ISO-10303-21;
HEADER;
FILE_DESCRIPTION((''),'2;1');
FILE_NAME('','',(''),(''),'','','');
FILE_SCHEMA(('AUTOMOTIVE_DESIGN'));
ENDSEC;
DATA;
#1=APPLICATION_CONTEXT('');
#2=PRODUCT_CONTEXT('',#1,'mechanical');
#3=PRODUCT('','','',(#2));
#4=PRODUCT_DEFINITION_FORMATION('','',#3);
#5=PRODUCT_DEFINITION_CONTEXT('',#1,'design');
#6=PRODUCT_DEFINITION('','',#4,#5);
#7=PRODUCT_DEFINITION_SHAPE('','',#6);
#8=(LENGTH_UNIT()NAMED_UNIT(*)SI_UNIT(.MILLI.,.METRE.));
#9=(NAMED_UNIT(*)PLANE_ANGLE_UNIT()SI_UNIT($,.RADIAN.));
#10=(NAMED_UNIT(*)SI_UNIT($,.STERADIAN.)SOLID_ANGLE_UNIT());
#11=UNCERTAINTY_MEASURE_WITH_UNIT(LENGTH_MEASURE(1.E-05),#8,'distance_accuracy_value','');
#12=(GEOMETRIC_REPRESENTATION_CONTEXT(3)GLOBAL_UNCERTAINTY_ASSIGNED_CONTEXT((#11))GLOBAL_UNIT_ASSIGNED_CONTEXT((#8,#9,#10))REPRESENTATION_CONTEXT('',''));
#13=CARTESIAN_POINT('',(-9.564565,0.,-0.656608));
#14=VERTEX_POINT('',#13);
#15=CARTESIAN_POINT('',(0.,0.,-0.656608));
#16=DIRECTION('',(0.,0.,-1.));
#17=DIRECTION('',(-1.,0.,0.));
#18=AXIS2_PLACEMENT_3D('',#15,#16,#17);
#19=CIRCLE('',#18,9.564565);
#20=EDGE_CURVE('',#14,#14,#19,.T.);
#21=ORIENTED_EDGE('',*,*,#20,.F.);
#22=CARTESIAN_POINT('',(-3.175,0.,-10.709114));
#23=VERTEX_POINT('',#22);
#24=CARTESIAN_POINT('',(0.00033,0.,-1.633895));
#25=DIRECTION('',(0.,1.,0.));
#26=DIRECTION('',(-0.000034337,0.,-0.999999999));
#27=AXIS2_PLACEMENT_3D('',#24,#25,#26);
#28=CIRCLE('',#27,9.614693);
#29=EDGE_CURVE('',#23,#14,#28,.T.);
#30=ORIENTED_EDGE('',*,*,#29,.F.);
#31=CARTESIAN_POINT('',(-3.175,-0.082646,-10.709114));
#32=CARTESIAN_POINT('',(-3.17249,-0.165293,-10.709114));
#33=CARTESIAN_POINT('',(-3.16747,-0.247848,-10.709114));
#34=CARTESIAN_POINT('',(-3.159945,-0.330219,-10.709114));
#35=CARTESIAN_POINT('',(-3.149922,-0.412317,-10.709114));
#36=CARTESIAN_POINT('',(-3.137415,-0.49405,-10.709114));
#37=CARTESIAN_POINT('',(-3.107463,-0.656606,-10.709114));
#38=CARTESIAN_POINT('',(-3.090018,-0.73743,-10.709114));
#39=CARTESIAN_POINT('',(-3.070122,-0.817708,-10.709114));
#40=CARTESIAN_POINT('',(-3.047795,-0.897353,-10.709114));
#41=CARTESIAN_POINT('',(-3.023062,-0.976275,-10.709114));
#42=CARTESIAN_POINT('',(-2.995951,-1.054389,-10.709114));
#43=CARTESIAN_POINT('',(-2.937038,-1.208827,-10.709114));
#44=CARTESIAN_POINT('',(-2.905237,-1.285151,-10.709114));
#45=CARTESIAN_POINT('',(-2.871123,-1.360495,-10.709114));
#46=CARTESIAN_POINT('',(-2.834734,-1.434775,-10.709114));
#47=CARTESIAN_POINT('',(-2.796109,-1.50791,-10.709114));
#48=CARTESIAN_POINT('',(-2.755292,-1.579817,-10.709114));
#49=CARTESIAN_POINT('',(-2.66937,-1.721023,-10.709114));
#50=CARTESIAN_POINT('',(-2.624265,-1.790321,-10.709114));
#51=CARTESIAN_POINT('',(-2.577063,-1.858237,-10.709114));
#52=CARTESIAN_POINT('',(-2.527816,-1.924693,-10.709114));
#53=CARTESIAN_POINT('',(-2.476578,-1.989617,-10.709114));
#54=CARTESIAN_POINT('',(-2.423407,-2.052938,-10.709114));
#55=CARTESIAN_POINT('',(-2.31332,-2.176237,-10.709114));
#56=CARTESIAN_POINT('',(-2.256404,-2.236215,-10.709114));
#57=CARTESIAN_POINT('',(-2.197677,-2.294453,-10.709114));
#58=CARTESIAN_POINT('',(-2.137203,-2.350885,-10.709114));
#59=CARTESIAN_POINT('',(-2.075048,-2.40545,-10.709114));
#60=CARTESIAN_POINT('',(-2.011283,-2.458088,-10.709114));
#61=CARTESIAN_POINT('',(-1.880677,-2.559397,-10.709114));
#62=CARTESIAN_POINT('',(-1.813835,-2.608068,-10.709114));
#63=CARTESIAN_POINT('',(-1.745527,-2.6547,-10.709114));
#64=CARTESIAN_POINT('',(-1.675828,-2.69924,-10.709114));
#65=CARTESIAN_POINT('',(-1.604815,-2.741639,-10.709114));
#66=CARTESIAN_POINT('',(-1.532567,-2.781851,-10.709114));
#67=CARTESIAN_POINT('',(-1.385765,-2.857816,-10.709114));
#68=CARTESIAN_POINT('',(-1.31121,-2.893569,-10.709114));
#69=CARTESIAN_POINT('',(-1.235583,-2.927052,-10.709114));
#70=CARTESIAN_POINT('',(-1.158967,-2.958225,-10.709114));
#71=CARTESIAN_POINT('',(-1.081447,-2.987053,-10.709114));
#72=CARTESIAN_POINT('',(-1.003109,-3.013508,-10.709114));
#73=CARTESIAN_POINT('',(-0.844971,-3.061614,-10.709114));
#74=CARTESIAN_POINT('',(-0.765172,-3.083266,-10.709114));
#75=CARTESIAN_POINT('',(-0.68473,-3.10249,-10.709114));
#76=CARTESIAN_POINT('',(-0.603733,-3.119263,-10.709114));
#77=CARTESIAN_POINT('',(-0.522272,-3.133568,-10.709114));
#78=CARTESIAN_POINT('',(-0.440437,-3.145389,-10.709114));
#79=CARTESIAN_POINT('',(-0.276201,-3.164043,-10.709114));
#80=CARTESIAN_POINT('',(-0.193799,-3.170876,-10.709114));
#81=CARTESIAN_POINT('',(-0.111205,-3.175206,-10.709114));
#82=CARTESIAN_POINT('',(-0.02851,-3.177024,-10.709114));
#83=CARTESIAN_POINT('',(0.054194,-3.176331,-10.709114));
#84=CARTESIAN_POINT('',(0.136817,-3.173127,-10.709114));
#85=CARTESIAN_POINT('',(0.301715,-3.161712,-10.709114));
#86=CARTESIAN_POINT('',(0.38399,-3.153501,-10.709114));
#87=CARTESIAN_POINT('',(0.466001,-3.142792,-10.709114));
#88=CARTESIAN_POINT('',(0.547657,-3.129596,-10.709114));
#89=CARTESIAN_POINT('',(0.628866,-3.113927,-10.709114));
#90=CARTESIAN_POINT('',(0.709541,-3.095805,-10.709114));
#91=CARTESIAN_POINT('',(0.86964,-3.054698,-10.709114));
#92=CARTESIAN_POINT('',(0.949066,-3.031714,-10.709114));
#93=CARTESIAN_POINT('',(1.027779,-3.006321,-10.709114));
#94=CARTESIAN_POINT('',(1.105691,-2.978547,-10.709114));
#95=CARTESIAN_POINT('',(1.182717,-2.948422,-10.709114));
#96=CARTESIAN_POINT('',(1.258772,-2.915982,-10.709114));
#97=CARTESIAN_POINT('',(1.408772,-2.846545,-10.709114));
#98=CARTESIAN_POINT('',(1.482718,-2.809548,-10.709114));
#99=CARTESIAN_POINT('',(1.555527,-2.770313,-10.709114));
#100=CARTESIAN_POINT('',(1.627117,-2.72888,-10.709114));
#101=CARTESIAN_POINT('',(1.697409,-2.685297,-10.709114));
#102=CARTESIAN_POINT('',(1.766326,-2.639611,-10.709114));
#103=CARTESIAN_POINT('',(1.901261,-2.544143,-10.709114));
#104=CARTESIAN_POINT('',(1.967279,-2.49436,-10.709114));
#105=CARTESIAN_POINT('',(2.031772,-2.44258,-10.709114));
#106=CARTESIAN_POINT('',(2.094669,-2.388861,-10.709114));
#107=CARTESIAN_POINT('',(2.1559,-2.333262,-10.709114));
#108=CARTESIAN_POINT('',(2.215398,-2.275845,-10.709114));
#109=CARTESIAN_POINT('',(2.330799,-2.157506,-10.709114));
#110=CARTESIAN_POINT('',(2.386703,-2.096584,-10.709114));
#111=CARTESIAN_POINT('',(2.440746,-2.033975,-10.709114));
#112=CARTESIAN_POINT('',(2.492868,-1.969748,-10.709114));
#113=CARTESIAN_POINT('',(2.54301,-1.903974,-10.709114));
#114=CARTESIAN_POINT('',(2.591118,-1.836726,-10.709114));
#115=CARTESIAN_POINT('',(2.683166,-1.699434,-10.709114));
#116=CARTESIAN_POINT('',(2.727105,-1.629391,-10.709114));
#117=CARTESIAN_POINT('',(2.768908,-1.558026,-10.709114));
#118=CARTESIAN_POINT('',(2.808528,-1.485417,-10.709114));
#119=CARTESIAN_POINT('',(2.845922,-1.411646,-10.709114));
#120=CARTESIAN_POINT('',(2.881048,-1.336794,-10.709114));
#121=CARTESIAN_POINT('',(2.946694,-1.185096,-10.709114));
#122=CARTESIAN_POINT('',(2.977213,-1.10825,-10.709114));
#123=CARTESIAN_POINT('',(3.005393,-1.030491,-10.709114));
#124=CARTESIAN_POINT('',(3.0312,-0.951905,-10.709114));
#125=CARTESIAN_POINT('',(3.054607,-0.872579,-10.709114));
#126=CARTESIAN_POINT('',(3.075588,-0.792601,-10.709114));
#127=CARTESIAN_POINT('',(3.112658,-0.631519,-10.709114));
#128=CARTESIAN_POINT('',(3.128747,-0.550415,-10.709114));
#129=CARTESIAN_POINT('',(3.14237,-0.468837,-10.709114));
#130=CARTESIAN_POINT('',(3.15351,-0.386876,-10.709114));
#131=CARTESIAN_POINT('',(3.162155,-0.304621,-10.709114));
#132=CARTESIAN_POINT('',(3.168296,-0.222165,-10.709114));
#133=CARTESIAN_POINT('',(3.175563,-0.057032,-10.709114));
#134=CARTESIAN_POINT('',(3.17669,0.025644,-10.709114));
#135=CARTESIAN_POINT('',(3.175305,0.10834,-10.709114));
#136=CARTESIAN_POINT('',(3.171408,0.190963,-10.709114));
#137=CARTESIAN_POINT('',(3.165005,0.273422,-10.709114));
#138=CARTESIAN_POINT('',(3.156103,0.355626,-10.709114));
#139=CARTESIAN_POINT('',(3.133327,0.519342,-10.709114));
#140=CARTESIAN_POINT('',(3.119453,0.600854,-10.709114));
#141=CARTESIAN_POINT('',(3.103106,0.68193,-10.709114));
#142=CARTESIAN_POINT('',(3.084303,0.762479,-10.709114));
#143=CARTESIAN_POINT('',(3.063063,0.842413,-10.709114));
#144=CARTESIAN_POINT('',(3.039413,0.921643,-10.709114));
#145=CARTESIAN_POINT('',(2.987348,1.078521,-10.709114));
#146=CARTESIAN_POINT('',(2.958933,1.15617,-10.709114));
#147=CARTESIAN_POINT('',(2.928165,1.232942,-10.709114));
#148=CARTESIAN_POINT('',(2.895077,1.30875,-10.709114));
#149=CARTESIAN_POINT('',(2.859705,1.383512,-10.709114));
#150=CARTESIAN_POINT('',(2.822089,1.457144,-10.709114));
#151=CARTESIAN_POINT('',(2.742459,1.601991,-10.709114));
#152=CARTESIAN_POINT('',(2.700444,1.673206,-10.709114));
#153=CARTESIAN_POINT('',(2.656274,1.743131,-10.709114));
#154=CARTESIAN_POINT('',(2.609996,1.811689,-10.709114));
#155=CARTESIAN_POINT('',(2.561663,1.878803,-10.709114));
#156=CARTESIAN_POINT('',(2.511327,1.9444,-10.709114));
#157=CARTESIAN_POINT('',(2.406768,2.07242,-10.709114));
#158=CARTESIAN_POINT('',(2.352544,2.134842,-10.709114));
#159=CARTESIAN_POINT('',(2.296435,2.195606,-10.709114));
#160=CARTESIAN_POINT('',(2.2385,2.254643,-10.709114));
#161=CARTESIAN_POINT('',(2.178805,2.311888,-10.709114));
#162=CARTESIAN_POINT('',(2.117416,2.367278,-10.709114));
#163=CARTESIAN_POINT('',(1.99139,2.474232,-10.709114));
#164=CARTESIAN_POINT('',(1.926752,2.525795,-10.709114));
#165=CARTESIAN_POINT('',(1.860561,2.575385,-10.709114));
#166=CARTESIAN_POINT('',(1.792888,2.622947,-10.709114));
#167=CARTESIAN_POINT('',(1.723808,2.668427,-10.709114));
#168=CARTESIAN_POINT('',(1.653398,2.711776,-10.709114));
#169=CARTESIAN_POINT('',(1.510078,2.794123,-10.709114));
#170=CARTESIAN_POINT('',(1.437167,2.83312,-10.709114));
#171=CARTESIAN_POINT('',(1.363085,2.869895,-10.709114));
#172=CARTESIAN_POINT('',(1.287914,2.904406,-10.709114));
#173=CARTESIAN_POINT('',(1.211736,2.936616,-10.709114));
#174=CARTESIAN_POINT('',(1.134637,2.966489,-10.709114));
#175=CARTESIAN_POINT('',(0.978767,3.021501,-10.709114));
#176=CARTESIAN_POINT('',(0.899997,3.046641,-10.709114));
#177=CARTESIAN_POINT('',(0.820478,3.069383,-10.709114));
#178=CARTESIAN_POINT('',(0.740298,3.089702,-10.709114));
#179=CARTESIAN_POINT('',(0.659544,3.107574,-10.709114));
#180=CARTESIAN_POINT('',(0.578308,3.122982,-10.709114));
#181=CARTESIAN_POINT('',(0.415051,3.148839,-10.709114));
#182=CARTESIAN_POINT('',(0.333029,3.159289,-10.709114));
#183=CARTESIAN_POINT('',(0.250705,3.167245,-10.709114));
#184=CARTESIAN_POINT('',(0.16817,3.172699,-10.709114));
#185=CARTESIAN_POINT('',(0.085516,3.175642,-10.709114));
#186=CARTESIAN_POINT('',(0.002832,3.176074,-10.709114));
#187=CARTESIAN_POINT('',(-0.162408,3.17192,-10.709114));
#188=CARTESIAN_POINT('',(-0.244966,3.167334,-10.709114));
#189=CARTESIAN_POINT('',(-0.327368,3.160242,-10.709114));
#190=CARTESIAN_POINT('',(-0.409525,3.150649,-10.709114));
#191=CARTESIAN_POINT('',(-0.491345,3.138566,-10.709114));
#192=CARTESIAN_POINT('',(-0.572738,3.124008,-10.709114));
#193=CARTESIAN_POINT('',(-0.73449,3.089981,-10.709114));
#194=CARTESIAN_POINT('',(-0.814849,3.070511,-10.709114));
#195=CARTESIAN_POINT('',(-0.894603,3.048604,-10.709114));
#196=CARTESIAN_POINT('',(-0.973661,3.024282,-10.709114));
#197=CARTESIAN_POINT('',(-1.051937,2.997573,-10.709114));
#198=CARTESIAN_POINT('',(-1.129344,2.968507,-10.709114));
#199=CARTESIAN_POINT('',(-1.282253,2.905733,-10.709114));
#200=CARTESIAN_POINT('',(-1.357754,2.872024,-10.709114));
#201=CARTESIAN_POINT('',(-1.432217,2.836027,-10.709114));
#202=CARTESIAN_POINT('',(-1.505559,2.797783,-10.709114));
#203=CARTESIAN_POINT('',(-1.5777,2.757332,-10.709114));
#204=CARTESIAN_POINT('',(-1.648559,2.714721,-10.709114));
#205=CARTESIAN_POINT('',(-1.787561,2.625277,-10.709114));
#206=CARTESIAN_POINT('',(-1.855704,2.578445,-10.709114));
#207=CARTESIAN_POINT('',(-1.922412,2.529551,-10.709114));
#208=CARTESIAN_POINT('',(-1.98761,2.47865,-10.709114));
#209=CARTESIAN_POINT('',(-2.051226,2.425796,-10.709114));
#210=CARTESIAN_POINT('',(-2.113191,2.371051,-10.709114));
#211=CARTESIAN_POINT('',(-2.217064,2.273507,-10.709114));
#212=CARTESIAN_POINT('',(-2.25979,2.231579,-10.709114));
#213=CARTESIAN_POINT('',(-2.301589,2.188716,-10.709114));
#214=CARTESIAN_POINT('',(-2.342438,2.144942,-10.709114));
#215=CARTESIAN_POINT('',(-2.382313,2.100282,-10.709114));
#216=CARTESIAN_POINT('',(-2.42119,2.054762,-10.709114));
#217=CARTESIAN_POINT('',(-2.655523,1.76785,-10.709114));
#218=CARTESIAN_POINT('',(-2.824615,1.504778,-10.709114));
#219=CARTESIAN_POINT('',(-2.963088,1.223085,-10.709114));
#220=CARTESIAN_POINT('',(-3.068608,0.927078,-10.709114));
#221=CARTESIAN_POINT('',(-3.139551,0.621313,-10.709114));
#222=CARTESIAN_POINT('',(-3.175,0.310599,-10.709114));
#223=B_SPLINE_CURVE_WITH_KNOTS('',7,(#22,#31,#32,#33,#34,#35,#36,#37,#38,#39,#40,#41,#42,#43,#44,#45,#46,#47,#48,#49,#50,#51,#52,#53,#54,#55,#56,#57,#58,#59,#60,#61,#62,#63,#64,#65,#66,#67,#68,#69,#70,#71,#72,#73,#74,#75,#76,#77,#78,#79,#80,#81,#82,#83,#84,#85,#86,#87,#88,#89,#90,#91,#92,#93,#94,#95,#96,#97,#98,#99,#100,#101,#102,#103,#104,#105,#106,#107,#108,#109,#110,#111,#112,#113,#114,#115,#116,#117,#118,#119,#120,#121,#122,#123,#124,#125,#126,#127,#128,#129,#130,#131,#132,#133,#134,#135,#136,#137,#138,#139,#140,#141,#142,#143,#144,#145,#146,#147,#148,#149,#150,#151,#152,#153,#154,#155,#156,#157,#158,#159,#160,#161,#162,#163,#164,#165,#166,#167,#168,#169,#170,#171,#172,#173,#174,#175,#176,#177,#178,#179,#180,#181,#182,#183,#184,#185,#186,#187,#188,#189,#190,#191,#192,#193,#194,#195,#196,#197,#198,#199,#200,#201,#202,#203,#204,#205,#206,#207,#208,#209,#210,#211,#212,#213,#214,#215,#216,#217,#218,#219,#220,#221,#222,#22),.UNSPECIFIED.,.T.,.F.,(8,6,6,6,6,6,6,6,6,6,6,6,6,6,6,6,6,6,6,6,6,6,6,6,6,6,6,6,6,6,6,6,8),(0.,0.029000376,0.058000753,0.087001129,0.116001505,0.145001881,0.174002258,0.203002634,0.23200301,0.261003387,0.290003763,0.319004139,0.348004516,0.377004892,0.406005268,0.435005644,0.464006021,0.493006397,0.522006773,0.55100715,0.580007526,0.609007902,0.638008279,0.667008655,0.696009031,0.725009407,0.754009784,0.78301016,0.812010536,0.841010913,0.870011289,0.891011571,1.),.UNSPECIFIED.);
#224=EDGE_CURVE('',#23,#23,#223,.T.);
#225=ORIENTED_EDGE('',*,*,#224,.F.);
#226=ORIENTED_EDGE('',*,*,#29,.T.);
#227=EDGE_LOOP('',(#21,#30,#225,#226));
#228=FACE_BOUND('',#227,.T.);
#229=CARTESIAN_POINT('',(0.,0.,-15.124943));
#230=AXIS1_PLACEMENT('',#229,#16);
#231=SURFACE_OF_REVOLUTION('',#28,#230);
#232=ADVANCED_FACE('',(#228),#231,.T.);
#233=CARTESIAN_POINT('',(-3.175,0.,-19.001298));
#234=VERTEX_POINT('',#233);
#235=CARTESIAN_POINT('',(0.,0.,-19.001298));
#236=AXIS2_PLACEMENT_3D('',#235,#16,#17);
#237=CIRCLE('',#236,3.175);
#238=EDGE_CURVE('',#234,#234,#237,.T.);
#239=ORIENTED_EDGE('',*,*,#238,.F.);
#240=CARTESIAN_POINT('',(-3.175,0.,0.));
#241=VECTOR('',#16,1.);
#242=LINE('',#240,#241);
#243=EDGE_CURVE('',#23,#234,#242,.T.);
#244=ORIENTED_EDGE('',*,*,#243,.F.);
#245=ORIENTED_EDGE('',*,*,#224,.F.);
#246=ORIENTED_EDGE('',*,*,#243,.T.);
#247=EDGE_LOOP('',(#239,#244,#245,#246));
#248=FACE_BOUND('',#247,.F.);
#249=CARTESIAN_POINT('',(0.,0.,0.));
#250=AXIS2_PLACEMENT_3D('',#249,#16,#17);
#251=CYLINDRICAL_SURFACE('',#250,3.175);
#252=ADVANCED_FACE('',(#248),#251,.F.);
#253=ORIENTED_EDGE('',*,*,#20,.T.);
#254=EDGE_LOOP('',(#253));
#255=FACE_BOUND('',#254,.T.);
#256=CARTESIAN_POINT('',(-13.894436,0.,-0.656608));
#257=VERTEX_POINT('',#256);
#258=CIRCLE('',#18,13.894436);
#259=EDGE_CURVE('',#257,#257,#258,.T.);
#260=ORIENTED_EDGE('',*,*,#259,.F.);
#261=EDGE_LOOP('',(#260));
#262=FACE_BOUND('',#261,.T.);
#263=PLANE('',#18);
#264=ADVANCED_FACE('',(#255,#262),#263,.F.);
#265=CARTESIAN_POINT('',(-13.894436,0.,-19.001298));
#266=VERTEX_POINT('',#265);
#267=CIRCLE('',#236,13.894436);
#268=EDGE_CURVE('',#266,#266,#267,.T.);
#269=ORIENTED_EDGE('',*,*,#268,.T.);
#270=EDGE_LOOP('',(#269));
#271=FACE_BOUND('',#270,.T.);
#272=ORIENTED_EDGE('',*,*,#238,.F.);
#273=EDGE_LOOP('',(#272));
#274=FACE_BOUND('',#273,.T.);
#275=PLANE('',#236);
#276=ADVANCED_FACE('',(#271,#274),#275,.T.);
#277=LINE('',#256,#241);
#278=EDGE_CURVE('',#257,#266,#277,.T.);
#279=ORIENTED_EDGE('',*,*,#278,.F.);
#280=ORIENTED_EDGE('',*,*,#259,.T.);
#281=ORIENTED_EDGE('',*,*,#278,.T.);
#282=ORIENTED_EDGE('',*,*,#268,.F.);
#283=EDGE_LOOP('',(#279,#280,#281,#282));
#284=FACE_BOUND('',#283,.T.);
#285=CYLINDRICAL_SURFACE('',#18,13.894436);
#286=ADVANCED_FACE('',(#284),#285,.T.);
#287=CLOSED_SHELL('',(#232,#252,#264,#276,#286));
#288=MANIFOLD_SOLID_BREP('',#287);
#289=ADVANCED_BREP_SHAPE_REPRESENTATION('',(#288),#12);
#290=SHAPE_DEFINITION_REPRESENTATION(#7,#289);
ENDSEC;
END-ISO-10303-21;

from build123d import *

# Parameters (mm, degrees)
F3_D           = 6.35
F3_CSINK_D     = 12.7
F3_CSINK_ANGLE = 90


# Not quite as in the source:
# - a feature names something its author has since deleted; it is built from what else it names


with BuildPart() as f1:
    # F0 (on Front) → F1 (revolve)
    with BuildSketch(Plane.XZ):
        with BuildLine():
            ThreePointArc((0, -11.2485876307), (-7.1355577219, -8.0776066744), (-9.5645654699, -0.6566077129))
            Line((-9.5645654699, -0.6566077129), (-13.8944359496, -0.6566077129))
            Line((-13.8944359496, -0.6566077129), (-13.8944359496, -19.0012976527))
            Line((-13.8944359496, -19.0012976527), (0, -19.0012976527))
            Line((0, -19.0012976527), (0, -11.2485876307))
        make_face()
    revolve(axis=Axis((0, 0, -15.1249426417), (0, 0, -1)))

    # F3 (through all)
    with Locations(Plane.XY):
        with Locations((0, 0)):
            CounterSinkHole(F3_D / 2, F3_CSINK_D / 2, counter_sink_angle=F3_CSINK_ANGLE)


solid = f1.part
